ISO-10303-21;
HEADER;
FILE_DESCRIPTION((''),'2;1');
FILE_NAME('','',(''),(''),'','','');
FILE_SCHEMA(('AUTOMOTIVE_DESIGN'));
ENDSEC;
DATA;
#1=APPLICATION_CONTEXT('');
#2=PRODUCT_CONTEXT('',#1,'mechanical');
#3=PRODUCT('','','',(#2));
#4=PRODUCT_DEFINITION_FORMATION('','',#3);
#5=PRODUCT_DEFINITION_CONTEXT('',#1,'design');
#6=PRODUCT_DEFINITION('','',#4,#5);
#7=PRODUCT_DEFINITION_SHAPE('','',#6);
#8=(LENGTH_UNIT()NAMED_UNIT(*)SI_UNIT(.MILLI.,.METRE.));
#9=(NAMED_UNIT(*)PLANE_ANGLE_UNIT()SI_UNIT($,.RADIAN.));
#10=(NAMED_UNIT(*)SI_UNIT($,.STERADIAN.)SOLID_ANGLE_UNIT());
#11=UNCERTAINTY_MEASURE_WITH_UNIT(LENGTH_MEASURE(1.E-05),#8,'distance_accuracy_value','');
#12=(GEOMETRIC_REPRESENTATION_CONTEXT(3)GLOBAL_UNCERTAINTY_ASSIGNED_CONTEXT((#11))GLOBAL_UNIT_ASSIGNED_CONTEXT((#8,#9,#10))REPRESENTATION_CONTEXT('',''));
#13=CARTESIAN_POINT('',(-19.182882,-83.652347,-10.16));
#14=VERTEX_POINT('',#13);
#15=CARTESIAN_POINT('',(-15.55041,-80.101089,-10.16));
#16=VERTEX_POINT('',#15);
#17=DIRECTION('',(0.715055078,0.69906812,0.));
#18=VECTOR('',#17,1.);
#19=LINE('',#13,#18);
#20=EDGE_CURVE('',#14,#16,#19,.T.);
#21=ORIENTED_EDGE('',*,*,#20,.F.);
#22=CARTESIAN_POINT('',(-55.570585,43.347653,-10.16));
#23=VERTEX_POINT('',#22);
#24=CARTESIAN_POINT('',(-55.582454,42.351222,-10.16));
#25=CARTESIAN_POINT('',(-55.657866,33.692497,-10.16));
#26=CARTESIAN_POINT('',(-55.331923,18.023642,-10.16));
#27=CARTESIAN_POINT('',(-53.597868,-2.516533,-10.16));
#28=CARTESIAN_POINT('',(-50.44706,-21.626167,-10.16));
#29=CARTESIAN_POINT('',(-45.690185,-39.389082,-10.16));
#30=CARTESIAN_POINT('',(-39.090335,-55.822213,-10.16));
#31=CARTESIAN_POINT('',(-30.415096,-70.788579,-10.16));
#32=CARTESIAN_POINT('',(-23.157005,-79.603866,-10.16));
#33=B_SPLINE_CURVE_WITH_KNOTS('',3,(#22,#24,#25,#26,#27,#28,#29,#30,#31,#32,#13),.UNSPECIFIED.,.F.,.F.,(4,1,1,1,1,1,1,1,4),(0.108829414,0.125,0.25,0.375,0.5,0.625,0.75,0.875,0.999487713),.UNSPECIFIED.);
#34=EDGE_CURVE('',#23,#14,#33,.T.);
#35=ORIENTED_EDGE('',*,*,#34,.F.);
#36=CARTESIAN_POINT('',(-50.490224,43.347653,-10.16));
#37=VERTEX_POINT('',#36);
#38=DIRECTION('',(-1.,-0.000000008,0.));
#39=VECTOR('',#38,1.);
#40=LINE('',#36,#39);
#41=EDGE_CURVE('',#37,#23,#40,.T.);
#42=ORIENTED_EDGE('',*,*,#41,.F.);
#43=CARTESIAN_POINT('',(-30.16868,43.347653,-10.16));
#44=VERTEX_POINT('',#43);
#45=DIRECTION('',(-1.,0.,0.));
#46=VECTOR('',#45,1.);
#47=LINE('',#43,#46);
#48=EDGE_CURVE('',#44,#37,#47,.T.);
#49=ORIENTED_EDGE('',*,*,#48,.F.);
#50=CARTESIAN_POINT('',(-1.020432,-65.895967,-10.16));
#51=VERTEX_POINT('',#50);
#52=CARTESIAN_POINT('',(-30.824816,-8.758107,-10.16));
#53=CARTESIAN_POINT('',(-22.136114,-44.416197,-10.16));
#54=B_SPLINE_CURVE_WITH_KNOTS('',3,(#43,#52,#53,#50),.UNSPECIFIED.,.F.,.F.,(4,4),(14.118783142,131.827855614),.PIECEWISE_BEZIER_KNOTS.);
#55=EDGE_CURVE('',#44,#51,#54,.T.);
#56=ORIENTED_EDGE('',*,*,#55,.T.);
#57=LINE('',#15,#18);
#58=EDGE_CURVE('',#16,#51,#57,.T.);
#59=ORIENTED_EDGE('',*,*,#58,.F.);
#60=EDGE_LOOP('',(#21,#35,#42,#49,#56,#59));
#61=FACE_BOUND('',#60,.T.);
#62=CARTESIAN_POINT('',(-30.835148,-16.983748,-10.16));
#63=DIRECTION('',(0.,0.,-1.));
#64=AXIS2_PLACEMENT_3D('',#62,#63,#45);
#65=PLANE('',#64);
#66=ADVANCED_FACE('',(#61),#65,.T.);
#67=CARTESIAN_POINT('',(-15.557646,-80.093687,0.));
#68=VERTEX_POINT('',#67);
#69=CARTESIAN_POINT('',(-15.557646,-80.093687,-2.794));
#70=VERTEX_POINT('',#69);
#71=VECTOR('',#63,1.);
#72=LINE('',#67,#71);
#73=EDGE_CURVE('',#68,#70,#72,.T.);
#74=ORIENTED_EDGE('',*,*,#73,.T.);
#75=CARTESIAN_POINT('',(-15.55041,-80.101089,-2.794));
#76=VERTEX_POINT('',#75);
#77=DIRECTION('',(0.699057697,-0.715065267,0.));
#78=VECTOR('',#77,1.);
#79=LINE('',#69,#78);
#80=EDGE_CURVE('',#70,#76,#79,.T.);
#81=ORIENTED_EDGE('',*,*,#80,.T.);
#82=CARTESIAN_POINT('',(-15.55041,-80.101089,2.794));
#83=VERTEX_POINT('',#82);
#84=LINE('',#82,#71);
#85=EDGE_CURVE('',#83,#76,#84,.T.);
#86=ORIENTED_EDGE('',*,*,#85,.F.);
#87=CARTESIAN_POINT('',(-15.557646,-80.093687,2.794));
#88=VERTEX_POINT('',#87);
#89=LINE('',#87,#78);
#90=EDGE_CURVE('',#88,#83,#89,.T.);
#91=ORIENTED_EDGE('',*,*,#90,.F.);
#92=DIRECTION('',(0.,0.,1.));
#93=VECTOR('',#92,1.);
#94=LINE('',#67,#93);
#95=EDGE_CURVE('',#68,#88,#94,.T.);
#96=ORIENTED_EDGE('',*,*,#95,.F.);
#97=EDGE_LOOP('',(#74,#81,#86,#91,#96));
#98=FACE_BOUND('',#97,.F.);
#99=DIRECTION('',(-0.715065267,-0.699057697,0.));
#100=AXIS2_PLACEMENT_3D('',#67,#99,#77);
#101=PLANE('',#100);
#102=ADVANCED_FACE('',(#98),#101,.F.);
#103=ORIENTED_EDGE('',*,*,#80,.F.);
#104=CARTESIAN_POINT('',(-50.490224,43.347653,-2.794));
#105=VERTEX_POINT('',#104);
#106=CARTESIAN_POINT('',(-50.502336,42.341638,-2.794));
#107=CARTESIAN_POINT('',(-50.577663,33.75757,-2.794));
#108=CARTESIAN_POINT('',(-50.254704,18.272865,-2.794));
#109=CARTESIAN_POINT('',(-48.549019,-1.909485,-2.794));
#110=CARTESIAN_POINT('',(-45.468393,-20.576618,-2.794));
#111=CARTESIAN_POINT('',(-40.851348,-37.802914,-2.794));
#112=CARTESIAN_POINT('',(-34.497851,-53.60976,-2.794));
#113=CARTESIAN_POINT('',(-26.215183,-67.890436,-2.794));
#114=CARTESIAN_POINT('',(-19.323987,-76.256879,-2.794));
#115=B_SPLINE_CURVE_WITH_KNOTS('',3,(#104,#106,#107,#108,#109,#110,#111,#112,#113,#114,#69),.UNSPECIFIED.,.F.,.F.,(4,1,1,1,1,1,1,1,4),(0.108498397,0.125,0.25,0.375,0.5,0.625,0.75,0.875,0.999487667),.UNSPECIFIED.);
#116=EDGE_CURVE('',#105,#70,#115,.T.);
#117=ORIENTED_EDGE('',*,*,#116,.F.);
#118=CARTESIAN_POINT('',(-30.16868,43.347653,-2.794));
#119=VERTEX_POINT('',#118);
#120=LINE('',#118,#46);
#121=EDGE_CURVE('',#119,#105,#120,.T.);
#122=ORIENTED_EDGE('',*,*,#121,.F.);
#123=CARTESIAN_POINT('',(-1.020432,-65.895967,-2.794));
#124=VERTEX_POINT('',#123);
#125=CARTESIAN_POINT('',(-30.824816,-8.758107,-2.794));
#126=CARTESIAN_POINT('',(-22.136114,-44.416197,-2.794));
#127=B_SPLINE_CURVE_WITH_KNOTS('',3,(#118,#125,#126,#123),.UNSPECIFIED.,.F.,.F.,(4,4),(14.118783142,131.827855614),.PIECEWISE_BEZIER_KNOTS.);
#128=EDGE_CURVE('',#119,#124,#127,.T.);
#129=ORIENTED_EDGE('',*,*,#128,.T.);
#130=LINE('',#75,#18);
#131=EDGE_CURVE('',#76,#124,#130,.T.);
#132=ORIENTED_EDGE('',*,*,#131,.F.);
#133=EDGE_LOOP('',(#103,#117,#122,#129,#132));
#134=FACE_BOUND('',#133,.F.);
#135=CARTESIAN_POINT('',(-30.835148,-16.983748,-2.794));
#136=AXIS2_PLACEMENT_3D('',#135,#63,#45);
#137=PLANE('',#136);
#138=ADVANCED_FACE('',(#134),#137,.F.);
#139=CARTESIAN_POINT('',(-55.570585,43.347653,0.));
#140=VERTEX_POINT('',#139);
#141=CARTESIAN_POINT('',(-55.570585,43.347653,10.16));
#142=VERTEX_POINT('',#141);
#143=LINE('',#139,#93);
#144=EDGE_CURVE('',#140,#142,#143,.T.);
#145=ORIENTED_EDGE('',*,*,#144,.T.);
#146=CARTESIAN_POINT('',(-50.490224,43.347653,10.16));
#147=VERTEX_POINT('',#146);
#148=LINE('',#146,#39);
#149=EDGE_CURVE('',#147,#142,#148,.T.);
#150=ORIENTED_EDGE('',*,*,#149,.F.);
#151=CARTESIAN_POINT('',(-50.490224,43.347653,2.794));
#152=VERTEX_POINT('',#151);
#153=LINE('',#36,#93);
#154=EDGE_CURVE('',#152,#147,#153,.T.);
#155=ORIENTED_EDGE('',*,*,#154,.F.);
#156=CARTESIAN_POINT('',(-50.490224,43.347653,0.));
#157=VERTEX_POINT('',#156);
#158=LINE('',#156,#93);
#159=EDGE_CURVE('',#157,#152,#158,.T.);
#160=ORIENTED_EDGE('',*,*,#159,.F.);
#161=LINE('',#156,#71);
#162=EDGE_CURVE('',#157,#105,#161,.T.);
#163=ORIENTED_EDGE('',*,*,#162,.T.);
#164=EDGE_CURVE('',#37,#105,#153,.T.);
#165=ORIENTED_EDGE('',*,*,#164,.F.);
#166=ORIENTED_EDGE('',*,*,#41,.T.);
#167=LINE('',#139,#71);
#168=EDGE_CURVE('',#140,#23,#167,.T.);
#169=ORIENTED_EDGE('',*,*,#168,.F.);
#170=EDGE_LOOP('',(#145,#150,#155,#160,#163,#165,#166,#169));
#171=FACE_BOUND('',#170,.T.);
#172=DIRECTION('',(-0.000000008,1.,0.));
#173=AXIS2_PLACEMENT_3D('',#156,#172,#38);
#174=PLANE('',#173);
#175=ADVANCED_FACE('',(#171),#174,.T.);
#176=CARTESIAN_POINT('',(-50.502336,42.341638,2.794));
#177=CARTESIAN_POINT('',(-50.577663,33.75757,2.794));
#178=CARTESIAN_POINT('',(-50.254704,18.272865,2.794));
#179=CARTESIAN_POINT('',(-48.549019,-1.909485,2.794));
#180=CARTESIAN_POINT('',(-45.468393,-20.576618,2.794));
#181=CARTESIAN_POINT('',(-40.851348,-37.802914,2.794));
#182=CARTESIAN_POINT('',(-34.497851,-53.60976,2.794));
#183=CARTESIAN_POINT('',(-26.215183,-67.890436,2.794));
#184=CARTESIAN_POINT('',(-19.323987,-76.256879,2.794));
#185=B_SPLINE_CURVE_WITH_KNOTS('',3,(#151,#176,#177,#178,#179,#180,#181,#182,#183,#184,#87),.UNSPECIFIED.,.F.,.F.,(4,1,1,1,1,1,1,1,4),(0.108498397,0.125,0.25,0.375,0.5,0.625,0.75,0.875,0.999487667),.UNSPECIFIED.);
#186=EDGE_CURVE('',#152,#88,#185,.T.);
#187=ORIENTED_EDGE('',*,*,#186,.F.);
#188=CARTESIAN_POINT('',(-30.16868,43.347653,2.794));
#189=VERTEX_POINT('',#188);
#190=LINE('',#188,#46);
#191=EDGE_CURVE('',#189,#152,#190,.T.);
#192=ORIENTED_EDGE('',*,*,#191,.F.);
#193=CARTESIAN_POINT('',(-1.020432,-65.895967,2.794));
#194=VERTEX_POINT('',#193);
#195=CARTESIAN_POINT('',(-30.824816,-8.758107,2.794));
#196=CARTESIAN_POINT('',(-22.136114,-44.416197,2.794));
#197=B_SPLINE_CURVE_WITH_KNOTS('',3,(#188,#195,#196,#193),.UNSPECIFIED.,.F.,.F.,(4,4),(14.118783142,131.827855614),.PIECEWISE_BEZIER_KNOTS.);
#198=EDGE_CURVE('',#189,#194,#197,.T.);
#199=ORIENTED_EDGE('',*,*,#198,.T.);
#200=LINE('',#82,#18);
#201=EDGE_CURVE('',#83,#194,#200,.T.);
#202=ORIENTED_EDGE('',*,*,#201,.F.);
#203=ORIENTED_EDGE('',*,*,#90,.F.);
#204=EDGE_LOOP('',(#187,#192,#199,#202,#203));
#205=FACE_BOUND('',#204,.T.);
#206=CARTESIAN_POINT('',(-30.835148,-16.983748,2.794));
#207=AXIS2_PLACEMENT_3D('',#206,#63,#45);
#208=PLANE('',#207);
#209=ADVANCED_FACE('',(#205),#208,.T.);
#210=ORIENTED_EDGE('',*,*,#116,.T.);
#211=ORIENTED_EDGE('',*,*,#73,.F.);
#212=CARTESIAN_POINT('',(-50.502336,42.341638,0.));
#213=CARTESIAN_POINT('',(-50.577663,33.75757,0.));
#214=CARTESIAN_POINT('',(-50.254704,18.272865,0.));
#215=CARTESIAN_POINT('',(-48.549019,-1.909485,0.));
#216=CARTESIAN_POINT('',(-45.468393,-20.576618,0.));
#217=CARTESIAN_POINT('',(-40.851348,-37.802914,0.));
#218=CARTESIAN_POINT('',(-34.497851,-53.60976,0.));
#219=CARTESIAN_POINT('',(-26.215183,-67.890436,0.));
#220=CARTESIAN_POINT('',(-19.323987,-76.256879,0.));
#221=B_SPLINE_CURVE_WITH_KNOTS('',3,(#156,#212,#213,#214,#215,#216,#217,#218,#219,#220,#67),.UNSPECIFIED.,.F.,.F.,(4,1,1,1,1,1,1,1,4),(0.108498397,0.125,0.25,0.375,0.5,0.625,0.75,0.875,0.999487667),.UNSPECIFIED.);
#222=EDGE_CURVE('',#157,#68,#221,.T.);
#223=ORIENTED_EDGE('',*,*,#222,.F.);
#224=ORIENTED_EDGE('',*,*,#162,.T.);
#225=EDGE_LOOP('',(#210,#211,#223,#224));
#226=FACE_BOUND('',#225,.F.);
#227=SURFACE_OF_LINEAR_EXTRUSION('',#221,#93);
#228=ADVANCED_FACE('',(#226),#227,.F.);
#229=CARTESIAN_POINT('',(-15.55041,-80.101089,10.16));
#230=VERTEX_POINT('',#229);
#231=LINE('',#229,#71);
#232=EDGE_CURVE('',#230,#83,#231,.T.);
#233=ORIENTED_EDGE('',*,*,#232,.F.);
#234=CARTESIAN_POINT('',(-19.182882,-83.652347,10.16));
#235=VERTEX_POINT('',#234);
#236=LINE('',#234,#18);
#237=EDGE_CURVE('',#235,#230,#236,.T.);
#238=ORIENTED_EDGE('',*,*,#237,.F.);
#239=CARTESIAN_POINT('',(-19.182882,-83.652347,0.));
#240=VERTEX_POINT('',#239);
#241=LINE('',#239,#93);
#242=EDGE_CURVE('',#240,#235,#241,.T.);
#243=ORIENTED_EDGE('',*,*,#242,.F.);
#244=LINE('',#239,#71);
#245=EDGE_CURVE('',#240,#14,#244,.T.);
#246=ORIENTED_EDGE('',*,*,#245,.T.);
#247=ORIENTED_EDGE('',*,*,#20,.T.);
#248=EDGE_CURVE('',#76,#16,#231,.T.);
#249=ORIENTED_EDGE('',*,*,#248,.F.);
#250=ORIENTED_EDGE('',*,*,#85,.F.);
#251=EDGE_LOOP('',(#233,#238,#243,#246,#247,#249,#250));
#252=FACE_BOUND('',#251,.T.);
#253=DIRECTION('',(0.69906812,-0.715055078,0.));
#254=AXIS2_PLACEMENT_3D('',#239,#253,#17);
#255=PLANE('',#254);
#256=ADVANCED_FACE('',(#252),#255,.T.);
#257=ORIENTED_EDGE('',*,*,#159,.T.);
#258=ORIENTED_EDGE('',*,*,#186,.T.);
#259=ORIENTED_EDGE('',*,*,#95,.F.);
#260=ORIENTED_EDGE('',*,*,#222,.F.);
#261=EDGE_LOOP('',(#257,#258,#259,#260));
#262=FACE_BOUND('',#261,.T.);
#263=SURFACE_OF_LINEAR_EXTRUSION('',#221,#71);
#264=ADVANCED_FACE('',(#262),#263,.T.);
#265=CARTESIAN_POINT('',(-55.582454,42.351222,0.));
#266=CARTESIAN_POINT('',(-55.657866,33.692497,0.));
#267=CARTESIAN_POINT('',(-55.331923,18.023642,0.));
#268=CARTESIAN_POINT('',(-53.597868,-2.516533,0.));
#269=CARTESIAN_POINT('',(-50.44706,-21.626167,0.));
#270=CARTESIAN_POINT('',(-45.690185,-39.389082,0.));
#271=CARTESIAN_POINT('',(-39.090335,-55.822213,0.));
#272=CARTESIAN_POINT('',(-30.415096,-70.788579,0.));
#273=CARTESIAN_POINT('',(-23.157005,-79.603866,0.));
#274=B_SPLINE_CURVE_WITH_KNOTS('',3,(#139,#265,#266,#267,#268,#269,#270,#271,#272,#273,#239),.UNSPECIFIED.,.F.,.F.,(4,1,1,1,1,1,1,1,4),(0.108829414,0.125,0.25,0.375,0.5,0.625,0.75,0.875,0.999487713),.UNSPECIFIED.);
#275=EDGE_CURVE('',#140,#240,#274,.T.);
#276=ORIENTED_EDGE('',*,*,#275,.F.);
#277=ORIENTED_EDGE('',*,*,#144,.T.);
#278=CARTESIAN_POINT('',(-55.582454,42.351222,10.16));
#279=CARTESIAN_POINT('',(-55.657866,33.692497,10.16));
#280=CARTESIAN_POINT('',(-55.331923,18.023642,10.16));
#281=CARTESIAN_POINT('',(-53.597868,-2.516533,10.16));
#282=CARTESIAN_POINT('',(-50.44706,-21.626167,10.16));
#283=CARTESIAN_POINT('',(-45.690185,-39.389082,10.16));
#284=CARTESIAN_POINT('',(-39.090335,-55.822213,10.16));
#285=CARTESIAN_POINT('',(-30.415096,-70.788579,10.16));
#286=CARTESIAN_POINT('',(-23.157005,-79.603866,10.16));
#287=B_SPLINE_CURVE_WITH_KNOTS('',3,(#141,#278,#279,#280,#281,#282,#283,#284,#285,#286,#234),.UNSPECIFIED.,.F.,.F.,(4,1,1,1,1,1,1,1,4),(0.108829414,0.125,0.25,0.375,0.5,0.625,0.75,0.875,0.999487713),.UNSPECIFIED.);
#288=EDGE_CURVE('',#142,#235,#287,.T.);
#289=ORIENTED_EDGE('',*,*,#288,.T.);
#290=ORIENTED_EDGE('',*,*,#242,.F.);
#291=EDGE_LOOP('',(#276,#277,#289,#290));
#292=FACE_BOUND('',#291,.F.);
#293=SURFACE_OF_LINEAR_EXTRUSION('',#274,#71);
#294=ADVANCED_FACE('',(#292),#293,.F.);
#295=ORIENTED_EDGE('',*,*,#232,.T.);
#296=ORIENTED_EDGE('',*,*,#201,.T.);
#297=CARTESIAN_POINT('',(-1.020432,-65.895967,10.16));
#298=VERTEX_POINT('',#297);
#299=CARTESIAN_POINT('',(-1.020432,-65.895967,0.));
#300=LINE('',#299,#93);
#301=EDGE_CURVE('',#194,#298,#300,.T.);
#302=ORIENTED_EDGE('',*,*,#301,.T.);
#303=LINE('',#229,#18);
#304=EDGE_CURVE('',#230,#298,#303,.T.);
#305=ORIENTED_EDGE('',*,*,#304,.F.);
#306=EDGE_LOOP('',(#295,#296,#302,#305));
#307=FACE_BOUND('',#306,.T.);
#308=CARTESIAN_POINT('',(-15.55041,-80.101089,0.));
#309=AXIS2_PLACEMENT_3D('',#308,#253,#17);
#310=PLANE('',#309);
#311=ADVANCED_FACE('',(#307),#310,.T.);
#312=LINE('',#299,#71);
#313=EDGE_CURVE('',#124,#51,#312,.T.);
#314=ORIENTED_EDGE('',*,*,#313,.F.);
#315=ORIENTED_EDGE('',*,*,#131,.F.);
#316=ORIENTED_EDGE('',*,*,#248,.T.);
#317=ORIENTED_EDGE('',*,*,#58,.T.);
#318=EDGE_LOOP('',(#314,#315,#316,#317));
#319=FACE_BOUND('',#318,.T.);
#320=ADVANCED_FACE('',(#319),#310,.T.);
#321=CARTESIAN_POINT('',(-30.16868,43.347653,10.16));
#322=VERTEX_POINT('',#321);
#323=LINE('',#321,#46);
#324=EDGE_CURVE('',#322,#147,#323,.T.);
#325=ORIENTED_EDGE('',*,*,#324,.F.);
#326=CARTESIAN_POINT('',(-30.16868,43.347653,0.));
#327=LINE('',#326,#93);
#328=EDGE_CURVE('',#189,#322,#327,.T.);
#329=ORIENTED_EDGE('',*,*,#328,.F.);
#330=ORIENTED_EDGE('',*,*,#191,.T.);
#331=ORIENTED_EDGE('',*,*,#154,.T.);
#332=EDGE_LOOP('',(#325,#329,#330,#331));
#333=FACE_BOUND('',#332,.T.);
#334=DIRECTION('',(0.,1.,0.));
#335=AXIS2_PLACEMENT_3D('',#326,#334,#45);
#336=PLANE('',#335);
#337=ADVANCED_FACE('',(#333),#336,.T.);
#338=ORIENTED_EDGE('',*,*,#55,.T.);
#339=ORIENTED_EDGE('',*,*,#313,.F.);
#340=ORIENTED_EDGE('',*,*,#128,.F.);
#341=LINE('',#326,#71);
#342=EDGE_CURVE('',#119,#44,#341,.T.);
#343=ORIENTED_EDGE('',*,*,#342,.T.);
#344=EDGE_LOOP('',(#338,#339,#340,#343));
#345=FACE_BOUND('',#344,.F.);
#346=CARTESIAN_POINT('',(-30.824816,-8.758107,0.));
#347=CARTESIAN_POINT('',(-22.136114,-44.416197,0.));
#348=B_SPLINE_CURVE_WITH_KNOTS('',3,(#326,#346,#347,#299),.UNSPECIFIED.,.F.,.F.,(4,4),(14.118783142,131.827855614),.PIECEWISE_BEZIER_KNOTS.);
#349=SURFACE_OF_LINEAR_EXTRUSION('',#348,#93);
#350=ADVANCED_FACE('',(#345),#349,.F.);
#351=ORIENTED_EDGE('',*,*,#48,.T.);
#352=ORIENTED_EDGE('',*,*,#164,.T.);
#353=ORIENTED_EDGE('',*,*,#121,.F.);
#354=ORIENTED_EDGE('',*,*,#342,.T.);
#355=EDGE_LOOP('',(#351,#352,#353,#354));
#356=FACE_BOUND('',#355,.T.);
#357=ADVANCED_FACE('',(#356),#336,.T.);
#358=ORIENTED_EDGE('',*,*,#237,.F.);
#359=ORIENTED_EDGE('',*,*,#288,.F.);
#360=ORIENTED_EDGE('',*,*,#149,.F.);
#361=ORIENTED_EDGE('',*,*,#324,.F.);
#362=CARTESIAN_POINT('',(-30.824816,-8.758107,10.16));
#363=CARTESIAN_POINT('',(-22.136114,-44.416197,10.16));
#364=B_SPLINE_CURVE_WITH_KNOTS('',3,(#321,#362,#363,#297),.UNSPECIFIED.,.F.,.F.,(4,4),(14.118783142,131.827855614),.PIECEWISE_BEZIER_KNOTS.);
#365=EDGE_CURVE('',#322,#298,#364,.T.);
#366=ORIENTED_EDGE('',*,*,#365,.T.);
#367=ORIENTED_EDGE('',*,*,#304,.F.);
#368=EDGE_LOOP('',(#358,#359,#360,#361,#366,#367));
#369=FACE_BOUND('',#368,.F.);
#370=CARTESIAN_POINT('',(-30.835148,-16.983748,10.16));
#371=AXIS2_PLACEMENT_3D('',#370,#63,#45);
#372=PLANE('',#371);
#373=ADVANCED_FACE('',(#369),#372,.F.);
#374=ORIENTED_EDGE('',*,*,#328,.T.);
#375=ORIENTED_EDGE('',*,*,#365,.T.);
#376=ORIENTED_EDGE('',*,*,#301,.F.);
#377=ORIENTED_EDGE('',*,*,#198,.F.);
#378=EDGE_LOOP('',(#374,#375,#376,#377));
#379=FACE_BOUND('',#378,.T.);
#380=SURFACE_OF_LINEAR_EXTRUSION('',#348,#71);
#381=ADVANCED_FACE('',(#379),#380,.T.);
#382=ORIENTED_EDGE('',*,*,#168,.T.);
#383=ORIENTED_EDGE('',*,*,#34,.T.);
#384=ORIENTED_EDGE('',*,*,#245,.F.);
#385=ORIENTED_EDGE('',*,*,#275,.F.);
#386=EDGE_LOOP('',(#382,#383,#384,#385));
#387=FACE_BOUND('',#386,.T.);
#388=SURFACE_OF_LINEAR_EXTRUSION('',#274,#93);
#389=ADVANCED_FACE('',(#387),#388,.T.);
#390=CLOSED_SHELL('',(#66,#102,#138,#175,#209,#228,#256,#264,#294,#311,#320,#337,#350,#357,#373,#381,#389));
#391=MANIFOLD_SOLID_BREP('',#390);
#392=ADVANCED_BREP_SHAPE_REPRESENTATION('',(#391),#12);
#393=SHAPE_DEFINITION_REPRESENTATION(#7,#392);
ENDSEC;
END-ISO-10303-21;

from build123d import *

# Parameters (mm, degrees)
F1_DEPTH = 10.16
F2_DEPTH = 2.794


# Not quite as in the source:
# - ends of sketch curves that miss each other by under 0.0002 mm in the source are joined


with BuildPart() as f1:
    # F0 (on Top) → F1 (new body, symmetric)
    with BuildSketch(Plane.XY):
        with BuildLine():
            add(Edge.make_bspline(
                [(-30.1686804344, 43.3476526069), (-30.8248162722, -8.7581067609), (-22.1361141771, -44.4161965277), (-1.0204318918, -65.8959671855)],
                knots=[14.1187831422, 14.1187831422, 14.1187831422, 14.1187831422, 131.8278556138, 131.8278556138, 131.8278556138, 131.8278556138], degree=3))
            Line((-30.1686804344, 43.3476526069), (-50.4902243697, 43.3476526069))
            add(Edge.make_bspline(
                [(-50.4902243697, 43.3476526069), (-50.5023356823, 42.3416381346), (-50.5776631638, 33.7575699347), (-50.2547042611, 18.2728647958), (-48.5490186564, -1.9094845449), (-45.4683930825, -20.5766183405), (-40.8513482733, -37.8029140743), (-34.4978508868, -53.6097599892), (-26.2151831057, -67.8904361601), (-19.3239866258, -76.2568786685), (-15.5576457112, -80.0936870299)],
                knots=[0.1084983974, 0.1084983974, 0.1084983974, 0.1084983974, 0.125, 0.25, 0.375, 0.5, 0.625, 0.75, 0.875, 0.9994876672, 0.9994876672, 0.9994876672, 0.9994876672], degree=3))
            Line((-15.5576457112, -80.0936870299), (-15.5504097194, -80.1010887171))
            Line((-15.5504097194, -80.1010887171), (-1.0204318918, -65.8959671855))
        make_face()
        with BuildLine():
            add(Edge.make_bspline(
                [(-50.4902243697, 43.3476526462), (-50.5023356823, 42.3416381346), (-50.5776631638, 33.7575699347), (-50.2547042611, 18.2728647958), (-48.5490186564, -1.9094845449), (-45.4683930825, -20.5766183405), (-40.8513482733, -37.8029140743), (-34.4978508868, -53.6097599892), (-26.2151831057, -67.8904361601), (-19.3239866258, -76.2568786685), (-15.5576457112, -80.0936870299)],
                knots=[0.1084983974, 0.1084983974, 0.1084983974, 0.1084983974, 0.125, 0.25, 0.375, 0.5, 0.625, 0.75, 0.875, 0.9994876672, 0.9994876672, 0.9994876672, 0.9994876672], degree=3))
            Line((-50.4902243697, 43.3476526462), (-55.5705854562, 43.3476526069))
            add(Edge.make_bspline(
                [(-55.5705854562, 43.3476526069), (-55.5824542112, 42.3512221988), (-55.6578660057, 33.6924970547), (-55.3319230242, 18.0236423903), (-53.5978680793, -2.5165326287), (-50.4470600065, -21.6261667001), (-45.6901847728, -39.3890823186), (-39.0903346211, -55.8222129569), (-30.4150960171, -70.7885790199), (-23.1570048132, -79.6038664954), (-19.1828818554, -83.6523472777)],
                knots=[0.1088294141, 0.1088294141, 0.1088294141, 0.1088294141, 0.125, 0.25, 0.375, 0.5, 0.625, 0.75, 0.875, 0.9994877133, 0.9994877133, 0.9994877133, 0.9994877133], degree=3))
            Line((-19.1828818554, -83.6523472777), (-15.5504097194, -80.1010887171))
            Line((-15.5504097194, -80.1010887171), (-15.5576457112, -80.0936870299))
        make_face()
    extrude(amount=F1_DEPTH, both=True)

    # F0 (on Top) → F2 (cut, symmetric)
    with BuildSketch(Plane.XY):
        with BuildLine():
            add(Edge.make_bspline(
                [(-30.1686804344, 43.3476526069), (-30.8248162722, -8.7581067609), (-22.1361141771, -44.4161965277), (-1.0204318918, -65.8959671855)],
                knots=[14.1187831422, 14.1187831422, 14.1187831422, 14.1187831422, 131.8278556138, 131.8278556138, 131.8278556138, 131.8278556138], degree=3))
            Line((-30.1686804344, 43.3476526069), (-50.4902243697, 43.3476526069))
            add(Edge.make_bspline(
                [(-50.4902243697, 43.3476526069), (-50.5023356823, 42.3416381346), (-50.5776631638, 33.7575699347), (-50.2547042611, 18.2728647958), (-48.5490186564, -1.9094845449), (-45.4683930825, -20.5766183405), (-40.8513482733, -37.8029140743), (-34.4978508868, -53.6097599892), (-26.2151831057, -67.8904361601), (-19.3239866258, -76.2568786685), (-15.5576457112, -80.0936870299)],
                knots=[0.1084983974, 0.1084983974, 0.1084983974, 0.1084983974, 0.125, 0.25, 0.375, 0.5, 0.625, 0.75, 0.875, 0.9994876672, 0.9994876672, 0.9994876672, 0.9994876672], degree=3))
            Line((-15.5576457112, -80.0936870299), (-15.5504097194, -80.1010887171))
            Line((-15.5504097194, -80.1010887171), (-1.0204318918, -65.8959671855))
        make_face()
    extrude(amount=F2_DEPTH, both=True, mode=Mode.SUBTRACT)


solid = f1.part
